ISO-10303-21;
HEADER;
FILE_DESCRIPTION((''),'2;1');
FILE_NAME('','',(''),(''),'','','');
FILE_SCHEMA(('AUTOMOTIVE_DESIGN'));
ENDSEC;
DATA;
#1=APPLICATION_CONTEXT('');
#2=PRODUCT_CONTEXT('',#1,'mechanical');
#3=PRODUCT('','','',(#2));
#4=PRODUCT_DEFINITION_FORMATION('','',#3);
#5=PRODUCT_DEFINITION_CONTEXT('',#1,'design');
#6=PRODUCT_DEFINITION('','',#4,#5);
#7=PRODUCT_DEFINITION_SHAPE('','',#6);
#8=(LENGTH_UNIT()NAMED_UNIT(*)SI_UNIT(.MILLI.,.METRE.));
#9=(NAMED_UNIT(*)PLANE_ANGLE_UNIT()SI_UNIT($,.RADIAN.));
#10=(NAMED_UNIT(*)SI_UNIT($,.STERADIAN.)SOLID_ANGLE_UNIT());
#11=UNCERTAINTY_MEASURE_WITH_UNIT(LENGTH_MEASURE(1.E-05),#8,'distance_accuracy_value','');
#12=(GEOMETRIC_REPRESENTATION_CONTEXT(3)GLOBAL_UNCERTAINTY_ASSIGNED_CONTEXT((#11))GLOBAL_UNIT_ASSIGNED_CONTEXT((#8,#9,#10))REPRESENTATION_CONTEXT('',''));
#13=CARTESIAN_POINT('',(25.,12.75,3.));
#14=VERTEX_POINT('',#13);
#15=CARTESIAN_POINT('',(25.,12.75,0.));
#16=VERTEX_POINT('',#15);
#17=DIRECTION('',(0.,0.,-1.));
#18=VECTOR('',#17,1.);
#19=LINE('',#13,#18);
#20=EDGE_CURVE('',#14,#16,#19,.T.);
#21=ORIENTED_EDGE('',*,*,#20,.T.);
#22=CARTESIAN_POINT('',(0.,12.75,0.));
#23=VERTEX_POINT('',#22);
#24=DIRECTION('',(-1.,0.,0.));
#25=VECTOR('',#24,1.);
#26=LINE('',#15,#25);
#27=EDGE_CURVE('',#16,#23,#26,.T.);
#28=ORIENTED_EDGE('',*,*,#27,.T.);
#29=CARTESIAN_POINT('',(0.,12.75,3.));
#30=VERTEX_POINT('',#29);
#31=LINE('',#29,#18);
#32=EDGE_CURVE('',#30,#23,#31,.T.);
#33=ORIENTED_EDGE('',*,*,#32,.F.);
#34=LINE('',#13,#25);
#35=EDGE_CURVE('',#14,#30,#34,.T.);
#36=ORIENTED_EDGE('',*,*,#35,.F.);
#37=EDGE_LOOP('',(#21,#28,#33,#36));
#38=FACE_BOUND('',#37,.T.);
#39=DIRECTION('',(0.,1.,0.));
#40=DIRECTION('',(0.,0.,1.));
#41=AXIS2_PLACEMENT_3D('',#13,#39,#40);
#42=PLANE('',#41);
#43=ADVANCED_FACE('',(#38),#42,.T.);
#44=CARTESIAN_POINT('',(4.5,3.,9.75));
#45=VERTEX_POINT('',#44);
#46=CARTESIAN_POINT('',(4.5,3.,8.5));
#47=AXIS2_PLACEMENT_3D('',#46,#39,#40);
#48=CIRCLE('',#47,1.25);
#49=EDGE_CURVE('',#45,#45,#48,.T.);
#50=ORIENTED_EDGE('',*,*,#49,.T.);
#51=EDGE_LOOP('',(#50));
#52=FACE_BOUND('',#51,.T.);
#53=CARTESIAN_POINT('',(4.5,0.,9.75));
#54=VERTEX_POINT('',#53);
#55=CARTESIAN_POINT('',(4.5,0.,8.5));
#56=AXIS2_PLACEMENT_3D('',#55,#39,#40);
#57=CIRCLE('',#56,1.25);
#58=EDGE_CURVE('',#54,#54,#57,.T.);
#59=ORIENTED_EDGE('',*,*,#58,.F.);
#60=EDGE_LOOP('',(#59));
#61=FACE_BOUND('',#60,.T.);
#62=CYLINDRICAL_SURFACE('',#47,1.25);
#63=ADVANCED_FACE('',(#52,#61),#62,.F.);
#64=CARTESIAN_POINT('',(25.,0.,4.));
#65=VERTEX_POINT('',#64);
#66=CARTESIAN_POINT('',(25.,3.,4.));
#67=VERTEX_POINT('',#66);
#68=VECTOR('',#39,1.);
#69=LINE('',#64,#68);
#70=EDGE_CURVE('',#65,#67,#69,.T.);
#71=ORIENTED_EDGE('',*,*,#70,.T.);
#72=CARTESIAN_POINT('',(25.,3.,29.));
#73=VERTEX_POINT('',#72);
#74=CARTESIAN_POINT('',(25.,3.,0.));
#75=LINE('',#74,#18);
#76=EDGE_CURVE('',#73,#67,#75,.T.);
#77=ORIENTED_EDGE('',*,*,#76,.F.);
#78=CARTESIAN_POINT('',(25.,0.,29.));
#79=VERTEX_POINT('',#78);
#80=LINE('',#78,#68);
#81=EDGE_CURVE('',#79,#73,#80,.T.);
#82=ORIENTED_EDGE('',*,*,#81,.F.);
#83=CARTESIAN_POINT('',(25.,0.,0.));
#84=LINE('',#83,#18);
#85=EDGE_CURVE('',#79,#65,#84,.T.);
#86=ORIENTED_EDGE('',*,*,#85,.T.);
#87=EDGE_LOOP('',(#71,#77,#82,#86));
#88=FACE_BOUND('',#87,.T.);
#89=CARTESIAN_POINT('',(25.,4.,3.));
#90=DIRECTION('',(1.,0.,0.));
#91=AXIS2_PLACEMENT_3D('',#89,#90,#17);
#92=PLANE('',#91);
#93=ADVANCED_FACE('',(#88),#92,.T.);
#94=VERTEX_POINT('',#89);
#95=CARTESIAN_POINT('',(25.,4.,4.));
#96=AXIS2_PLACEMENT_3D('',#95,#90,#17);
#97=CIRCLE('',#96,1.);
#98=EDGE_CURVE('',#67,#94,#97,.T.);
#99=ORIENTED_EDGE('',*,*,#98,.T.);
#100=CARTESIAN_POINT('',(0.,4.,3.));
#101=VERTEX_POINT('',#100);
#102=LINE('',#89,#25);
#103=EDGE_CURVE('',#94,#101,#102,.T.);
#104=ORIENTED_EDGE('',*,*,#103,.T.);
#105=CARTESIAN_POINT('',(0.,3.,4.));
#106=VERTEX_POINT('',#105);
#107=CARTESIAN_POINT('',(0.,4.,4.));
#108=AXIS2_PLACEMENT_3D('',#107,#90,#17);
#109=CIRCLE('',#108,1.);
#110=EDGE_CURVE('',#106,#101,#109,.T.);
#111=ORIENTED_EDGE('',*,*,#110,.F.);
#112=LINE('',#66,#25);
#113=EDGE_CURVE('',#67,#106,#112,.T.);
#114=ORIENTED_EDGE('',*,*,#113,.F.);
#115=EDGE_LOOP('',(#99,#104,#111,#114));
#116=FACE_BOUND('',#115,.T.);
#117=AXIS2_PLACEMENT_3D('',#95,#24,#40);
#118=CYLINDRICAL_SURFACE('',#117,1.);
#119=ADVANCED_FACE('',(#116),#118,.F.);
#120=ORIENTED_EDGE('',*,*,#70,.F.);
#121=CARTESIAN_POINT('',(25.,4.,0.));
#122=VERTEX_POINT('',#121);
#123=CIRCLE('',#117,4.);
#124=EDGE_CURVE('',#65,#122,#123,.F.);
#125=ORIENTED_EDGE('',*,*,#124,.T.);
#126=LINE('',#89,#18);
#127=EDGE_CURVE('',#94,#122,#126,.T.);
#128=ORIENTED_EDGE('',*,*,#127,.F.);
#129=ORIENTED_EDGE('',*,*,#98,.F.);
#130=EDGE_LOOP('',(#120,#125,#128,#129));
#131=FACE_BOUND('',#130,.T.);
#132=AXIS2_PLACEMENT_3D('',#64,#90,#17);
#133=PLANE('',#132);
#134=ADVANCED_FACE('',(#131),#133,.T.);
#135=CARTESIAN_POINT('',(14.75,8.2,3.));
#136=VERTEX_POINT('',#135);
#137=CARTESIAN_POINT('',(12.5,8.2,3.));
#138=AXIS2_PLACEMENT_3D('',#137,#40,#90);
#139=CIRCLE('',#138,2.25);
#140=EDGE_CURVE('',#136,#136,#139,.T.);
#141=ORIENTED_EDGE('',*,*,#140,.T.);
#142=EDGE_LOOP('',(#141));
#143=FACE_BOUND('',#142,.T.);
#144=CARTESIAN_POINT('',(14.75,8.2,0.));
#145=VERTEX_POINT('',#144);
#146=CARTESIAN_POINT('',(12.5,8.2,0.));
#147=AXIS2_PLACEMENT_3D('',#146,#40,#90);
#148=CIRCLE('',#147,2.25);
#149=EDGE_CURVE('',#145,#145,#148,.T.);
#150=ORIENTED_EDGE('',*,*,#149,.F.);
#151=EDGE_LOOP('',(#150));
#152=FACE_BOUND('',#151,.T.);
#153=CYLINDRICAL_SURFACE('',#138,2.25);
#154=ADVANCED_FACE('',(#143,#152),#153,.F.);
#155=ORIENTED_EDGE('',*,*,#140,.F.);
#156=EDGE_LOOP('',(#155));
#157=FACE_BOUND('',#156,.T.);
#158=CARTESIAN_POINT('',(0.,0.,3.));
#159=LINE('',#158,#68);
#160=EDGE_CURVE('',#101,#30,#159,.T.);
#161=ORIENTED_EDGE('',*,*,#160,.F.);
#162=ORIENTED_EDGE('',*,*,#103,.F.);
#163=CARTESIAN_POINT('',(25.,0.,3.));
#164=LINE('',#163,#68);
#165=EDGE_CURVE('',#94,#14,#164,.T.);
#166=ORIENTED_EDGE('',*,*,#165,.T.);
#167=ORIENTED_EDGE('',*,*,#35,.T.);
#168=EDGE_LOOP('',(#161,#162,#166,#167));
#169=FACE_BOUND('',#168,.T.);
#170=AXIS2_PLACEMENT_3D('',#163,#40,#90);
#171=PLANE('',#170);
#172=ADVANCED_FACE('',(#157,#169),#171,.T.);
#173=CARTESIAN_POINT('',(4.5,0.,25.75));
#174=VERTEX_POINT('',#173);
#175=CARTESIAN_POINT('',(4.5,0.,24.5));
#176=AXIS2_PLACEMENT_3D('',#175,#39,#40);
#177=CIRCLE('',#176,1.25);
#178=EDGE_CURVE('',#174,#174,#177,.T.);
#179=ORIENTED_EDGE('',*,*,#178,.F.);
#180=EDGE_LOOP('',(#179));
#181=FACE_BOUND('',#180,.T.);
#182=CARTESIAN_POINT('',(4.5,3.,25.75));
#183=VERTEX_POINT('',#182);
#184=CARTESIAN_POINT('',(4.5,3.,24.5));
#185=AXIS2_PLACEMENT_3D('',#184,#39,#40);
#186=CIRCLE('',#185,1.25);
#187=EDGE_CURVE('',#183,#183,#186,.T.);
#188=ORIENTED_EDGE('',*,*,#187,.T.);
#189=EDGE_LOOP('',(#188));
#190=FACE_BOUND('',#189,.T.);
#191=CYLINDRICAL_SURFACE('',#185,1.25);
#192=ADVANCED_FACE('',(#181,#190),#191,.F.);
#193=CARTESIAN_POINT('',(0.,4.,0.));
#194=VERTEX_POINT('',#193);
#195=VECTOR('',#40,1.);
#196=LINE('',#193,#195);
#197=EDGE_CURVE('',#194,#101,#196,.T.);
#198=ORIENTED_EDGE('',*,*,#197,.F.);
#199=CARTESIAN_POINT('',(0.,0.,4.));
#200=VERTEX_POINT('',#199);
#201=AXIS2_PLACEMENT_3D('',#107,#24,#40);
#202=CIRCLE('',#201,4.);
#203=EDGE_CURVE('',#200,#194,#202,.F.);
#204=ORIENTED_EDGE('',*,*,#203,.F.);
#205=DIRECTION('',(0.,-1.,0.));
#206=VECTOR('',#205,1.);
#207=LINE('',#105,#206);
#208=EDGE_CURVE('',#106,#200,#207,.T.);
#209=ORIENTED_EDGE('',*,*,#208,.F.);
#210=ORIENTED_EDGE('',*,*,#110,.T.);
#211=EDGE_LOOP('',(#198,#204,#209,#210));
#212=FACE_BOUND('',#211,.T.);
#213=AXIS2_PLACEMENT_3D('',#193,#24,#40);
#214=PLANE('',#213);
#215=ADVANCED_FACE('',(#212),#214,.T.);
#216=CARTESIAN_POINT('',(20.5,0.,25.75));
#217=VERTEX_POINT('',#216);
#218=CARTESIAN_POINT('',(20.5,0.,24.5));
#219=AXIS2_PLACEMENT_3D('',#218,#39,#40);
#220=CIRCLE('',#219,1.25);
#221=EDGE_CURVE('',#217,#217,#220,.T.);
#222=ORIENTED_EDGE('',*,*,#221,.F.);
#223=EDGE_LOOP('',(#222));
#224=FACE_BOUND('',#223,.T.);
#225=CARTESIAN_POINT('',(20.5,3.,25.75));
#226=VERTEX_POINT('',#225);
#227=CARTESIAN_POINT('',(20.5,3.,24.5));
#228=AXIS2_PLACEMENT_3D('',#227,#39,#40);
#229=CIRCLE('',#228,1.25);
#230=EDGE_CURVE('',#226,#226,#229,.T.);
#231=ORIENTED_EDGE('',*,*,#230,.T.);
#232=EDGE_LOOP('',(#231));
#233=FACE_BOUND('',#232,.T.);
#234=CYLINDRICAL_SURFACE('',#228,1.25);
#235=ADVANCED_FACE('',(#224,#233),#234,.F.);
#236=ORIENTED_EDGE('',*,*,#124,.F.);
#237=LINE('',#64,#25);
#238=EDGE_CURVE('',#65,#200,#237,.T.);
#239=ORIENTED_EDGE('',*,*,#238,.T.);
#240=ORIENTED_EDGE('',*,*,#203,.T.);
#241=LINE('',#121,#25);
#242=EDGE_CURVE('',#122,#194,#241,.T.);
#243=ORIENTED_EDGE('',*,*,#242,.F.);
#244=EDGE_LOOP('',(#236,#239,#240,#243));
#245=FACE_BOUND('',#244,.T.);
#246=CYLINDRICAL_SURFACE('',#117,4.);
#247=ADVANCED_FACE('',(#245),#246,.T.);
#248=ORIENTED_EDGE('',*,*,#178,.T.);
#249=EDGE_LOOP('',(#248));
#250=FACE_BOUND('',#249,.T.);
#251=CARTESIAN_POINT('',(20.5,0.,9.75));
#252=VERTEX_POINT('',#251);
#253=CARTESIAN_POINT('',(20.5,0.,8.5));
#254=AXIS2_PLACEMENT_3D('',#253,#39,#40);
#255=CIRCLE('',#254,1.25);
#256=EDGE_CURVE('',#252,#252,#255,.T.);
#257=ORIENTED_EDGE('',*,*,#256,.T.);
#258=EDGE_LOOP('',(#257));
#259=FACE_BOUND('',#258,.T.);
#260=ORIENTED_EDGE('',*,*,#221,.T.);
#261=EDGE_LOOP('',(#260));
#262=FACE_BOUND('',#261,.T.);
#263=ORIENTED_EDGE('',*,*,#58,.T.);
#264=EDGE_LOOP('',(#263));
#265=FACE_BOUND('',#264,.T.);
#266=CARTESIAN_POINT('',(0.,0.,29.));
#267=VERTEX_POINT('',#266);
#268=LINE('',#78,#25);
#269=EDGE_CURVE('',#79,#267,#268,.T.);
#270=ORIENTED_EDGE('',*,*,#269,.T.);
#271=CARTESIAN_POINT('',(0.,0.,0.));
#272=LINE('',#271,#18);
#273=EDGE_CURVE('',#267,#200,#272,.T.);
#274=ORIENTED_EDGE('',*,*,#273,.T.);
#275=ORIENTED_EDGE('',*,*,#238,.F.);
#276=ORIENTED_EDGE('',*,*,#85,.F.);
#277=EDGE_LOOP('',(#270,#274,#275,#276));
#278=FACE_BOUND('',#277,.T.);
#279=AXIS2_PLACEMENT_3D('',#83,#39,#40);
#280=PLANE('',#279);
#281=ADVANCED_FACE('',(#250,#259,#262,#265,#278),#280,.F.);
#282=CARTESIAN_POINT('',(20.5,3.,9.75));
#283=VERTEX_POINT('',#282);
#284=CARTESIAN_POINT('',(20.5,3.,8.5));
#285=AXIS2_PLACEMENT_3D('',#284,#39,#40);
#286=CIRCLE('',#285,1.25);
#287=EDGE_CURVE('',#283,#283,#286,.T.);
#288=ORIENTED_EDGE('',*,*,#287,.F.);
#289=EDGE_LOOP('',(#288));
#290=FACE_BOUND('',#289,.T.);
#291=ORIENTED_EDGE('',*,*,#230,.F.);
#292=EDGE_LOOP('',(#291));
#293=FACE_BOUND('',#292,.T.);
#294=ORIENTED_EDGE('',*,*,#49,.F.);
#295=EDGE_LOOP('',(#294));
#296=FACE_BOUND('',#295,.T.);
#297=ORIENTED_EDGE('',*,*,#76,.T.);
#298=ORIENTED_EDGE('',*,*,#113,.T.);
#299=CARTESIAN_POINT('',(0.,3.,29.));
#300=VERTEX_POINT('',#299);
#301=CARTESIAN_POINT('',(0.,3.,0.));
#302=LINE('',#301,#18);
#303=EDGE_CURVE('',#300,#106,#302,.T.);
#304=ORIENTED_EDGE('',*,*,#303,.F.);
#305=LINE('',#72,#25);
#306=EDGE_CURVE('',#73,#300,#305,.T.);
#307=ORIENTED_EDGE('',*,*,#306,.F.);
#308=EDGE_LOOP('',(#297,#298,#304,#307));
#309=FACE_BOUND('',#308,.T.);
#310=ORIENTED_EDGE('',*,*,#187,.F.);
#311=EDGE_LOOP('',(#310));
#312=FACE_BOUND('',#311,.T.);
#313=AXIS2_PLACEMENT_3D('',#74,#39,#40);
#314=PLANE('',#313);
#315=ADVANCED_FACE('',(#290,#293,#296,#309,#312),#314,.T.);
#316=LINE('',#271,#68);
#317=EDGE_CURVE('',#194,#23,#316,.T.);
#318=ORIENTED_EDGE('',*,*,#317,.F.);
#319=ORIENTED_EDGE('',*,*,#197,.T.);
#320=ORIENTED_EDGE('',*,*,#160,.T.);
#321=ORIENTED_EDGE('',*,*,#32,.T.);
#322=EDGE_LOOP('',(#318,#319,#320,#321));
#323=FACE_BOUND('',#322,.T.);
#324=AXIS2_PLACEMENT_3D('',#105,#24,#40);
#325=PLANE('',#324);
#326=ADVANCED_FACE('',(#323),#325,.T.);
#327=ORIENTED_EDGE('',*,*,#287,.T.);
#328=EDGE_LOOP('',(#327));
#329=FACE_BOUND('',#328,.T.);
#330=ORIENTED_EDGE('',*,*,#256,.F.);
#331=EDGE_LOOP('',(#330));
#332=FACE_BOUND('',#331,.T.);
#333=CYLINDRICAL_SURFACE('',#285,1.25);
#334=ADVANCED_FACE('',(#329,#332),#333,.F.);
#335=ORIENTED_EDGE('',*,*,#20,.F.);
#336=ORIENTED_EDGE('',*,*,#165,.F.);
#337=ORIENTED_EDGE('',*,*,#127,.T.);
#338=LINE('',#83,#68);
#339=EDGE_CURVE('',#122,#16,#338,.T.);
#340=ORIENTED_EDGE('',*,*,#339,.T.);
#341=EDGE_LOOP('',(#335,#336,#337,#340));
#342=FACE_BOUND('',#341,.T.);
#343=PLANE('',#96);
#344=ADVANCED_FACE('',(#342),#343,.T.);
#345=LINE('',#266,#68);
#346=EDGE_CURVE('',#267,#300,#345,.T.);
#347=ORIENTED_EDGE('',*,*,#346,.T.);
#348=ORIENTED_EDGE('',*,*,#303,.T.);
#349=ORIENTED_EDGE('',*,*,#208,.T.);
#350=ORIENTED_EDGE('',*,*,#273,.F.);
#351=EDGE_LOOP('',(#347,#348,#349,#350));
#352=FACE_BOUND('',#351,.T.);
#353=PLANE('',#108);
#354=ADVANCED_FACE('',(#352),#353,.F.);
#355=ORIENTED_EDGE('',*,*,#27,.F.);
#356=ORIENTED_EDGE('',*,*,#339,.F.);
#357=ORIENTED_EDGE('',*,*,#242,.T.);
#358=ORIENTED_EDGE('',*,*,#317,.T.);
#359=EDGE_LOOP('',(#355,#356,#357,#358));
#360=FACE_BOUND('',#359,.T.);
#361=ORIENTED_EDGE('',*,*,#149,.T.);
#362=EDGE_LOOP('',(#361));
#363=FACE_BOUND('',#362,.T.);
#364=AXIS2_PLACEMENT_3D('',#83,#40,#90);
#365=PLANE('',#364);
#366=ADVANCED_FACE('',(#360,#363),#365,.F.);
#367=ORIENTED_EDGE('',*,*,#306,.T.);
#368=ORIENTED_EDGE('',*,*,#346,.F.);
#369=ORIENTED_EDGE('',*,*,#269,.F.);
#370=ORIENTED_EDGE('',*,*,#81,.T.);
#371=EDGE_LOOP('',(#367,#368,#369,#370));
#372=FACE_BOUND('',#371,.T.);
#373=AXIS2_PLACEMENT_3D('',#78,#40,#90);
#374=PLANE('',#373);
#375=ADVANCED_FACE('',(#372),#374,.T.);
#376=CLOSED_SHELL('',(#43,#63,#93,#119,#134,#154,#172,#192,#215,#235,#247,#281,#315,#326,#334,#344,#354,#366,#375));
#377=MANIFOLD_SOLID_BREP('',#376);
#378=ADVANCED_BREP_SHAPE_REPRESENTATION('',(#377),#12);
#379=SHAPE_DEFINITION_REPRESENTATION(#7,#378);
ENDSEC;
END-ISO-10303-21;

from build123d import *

# Parameters (mm, degrees)
T_LE_DE_BASE_PLI_E1_DEPTH = 25
TROU_TARAUD_M31_D         = 2.5
D_GAGEMENT_M41_D          = 4.5


# Sheet-metal steps are written as plain solids
with BuildPart() as part:
    # Esquisse1 → Tôle de base pliée1 (new body)
    with BuildSketch(Plane(origin=(0, 0, 0), x_dir=(0, 0, -1), z_dir=(1, 0, 0))):
        with BuildLine():
            Line((0, 12.75), (0, 4))
            ThreePointArc((0, 4), (-1.171572875, 1.171572875), (-4, 0))
            Line((-4, 0), (-29, 0))
            Line((-29, 0), (-29, 3))
            Line((-29, 3), (-4, 3))
            ThreePointArc((-4, 3), (-3.292893219, 3.292893219), (-3, 4))
            Line((-3, 4), (-3, 12.75))
            Line((-3, 12.75), (0, 12.75))
        make_face()
    extrude(amount=T_LE_DE_BASE_PLI_E1_DEPTH)

    # Trou taraudé M31 (through all)
    with Locations(Plane(origin=(0, 3, 0), x_dir=(1, 0, 0), z_dir=(0, 1, 0))):
        with Locations((4.5, -24.5), (4.5, -8.5), (20.5, -8.5), (20.5, -24.5)):
            Hole(TROU_TARAUD_M31_D / 2)

    # Dégagement M41 (through all)
    with Locations(Plane.XY.offset(3)):
        with Locations((12.5, 8.2)):
            Hole(D_GAGEMENT_M41_D / 2)


solid = part.part
